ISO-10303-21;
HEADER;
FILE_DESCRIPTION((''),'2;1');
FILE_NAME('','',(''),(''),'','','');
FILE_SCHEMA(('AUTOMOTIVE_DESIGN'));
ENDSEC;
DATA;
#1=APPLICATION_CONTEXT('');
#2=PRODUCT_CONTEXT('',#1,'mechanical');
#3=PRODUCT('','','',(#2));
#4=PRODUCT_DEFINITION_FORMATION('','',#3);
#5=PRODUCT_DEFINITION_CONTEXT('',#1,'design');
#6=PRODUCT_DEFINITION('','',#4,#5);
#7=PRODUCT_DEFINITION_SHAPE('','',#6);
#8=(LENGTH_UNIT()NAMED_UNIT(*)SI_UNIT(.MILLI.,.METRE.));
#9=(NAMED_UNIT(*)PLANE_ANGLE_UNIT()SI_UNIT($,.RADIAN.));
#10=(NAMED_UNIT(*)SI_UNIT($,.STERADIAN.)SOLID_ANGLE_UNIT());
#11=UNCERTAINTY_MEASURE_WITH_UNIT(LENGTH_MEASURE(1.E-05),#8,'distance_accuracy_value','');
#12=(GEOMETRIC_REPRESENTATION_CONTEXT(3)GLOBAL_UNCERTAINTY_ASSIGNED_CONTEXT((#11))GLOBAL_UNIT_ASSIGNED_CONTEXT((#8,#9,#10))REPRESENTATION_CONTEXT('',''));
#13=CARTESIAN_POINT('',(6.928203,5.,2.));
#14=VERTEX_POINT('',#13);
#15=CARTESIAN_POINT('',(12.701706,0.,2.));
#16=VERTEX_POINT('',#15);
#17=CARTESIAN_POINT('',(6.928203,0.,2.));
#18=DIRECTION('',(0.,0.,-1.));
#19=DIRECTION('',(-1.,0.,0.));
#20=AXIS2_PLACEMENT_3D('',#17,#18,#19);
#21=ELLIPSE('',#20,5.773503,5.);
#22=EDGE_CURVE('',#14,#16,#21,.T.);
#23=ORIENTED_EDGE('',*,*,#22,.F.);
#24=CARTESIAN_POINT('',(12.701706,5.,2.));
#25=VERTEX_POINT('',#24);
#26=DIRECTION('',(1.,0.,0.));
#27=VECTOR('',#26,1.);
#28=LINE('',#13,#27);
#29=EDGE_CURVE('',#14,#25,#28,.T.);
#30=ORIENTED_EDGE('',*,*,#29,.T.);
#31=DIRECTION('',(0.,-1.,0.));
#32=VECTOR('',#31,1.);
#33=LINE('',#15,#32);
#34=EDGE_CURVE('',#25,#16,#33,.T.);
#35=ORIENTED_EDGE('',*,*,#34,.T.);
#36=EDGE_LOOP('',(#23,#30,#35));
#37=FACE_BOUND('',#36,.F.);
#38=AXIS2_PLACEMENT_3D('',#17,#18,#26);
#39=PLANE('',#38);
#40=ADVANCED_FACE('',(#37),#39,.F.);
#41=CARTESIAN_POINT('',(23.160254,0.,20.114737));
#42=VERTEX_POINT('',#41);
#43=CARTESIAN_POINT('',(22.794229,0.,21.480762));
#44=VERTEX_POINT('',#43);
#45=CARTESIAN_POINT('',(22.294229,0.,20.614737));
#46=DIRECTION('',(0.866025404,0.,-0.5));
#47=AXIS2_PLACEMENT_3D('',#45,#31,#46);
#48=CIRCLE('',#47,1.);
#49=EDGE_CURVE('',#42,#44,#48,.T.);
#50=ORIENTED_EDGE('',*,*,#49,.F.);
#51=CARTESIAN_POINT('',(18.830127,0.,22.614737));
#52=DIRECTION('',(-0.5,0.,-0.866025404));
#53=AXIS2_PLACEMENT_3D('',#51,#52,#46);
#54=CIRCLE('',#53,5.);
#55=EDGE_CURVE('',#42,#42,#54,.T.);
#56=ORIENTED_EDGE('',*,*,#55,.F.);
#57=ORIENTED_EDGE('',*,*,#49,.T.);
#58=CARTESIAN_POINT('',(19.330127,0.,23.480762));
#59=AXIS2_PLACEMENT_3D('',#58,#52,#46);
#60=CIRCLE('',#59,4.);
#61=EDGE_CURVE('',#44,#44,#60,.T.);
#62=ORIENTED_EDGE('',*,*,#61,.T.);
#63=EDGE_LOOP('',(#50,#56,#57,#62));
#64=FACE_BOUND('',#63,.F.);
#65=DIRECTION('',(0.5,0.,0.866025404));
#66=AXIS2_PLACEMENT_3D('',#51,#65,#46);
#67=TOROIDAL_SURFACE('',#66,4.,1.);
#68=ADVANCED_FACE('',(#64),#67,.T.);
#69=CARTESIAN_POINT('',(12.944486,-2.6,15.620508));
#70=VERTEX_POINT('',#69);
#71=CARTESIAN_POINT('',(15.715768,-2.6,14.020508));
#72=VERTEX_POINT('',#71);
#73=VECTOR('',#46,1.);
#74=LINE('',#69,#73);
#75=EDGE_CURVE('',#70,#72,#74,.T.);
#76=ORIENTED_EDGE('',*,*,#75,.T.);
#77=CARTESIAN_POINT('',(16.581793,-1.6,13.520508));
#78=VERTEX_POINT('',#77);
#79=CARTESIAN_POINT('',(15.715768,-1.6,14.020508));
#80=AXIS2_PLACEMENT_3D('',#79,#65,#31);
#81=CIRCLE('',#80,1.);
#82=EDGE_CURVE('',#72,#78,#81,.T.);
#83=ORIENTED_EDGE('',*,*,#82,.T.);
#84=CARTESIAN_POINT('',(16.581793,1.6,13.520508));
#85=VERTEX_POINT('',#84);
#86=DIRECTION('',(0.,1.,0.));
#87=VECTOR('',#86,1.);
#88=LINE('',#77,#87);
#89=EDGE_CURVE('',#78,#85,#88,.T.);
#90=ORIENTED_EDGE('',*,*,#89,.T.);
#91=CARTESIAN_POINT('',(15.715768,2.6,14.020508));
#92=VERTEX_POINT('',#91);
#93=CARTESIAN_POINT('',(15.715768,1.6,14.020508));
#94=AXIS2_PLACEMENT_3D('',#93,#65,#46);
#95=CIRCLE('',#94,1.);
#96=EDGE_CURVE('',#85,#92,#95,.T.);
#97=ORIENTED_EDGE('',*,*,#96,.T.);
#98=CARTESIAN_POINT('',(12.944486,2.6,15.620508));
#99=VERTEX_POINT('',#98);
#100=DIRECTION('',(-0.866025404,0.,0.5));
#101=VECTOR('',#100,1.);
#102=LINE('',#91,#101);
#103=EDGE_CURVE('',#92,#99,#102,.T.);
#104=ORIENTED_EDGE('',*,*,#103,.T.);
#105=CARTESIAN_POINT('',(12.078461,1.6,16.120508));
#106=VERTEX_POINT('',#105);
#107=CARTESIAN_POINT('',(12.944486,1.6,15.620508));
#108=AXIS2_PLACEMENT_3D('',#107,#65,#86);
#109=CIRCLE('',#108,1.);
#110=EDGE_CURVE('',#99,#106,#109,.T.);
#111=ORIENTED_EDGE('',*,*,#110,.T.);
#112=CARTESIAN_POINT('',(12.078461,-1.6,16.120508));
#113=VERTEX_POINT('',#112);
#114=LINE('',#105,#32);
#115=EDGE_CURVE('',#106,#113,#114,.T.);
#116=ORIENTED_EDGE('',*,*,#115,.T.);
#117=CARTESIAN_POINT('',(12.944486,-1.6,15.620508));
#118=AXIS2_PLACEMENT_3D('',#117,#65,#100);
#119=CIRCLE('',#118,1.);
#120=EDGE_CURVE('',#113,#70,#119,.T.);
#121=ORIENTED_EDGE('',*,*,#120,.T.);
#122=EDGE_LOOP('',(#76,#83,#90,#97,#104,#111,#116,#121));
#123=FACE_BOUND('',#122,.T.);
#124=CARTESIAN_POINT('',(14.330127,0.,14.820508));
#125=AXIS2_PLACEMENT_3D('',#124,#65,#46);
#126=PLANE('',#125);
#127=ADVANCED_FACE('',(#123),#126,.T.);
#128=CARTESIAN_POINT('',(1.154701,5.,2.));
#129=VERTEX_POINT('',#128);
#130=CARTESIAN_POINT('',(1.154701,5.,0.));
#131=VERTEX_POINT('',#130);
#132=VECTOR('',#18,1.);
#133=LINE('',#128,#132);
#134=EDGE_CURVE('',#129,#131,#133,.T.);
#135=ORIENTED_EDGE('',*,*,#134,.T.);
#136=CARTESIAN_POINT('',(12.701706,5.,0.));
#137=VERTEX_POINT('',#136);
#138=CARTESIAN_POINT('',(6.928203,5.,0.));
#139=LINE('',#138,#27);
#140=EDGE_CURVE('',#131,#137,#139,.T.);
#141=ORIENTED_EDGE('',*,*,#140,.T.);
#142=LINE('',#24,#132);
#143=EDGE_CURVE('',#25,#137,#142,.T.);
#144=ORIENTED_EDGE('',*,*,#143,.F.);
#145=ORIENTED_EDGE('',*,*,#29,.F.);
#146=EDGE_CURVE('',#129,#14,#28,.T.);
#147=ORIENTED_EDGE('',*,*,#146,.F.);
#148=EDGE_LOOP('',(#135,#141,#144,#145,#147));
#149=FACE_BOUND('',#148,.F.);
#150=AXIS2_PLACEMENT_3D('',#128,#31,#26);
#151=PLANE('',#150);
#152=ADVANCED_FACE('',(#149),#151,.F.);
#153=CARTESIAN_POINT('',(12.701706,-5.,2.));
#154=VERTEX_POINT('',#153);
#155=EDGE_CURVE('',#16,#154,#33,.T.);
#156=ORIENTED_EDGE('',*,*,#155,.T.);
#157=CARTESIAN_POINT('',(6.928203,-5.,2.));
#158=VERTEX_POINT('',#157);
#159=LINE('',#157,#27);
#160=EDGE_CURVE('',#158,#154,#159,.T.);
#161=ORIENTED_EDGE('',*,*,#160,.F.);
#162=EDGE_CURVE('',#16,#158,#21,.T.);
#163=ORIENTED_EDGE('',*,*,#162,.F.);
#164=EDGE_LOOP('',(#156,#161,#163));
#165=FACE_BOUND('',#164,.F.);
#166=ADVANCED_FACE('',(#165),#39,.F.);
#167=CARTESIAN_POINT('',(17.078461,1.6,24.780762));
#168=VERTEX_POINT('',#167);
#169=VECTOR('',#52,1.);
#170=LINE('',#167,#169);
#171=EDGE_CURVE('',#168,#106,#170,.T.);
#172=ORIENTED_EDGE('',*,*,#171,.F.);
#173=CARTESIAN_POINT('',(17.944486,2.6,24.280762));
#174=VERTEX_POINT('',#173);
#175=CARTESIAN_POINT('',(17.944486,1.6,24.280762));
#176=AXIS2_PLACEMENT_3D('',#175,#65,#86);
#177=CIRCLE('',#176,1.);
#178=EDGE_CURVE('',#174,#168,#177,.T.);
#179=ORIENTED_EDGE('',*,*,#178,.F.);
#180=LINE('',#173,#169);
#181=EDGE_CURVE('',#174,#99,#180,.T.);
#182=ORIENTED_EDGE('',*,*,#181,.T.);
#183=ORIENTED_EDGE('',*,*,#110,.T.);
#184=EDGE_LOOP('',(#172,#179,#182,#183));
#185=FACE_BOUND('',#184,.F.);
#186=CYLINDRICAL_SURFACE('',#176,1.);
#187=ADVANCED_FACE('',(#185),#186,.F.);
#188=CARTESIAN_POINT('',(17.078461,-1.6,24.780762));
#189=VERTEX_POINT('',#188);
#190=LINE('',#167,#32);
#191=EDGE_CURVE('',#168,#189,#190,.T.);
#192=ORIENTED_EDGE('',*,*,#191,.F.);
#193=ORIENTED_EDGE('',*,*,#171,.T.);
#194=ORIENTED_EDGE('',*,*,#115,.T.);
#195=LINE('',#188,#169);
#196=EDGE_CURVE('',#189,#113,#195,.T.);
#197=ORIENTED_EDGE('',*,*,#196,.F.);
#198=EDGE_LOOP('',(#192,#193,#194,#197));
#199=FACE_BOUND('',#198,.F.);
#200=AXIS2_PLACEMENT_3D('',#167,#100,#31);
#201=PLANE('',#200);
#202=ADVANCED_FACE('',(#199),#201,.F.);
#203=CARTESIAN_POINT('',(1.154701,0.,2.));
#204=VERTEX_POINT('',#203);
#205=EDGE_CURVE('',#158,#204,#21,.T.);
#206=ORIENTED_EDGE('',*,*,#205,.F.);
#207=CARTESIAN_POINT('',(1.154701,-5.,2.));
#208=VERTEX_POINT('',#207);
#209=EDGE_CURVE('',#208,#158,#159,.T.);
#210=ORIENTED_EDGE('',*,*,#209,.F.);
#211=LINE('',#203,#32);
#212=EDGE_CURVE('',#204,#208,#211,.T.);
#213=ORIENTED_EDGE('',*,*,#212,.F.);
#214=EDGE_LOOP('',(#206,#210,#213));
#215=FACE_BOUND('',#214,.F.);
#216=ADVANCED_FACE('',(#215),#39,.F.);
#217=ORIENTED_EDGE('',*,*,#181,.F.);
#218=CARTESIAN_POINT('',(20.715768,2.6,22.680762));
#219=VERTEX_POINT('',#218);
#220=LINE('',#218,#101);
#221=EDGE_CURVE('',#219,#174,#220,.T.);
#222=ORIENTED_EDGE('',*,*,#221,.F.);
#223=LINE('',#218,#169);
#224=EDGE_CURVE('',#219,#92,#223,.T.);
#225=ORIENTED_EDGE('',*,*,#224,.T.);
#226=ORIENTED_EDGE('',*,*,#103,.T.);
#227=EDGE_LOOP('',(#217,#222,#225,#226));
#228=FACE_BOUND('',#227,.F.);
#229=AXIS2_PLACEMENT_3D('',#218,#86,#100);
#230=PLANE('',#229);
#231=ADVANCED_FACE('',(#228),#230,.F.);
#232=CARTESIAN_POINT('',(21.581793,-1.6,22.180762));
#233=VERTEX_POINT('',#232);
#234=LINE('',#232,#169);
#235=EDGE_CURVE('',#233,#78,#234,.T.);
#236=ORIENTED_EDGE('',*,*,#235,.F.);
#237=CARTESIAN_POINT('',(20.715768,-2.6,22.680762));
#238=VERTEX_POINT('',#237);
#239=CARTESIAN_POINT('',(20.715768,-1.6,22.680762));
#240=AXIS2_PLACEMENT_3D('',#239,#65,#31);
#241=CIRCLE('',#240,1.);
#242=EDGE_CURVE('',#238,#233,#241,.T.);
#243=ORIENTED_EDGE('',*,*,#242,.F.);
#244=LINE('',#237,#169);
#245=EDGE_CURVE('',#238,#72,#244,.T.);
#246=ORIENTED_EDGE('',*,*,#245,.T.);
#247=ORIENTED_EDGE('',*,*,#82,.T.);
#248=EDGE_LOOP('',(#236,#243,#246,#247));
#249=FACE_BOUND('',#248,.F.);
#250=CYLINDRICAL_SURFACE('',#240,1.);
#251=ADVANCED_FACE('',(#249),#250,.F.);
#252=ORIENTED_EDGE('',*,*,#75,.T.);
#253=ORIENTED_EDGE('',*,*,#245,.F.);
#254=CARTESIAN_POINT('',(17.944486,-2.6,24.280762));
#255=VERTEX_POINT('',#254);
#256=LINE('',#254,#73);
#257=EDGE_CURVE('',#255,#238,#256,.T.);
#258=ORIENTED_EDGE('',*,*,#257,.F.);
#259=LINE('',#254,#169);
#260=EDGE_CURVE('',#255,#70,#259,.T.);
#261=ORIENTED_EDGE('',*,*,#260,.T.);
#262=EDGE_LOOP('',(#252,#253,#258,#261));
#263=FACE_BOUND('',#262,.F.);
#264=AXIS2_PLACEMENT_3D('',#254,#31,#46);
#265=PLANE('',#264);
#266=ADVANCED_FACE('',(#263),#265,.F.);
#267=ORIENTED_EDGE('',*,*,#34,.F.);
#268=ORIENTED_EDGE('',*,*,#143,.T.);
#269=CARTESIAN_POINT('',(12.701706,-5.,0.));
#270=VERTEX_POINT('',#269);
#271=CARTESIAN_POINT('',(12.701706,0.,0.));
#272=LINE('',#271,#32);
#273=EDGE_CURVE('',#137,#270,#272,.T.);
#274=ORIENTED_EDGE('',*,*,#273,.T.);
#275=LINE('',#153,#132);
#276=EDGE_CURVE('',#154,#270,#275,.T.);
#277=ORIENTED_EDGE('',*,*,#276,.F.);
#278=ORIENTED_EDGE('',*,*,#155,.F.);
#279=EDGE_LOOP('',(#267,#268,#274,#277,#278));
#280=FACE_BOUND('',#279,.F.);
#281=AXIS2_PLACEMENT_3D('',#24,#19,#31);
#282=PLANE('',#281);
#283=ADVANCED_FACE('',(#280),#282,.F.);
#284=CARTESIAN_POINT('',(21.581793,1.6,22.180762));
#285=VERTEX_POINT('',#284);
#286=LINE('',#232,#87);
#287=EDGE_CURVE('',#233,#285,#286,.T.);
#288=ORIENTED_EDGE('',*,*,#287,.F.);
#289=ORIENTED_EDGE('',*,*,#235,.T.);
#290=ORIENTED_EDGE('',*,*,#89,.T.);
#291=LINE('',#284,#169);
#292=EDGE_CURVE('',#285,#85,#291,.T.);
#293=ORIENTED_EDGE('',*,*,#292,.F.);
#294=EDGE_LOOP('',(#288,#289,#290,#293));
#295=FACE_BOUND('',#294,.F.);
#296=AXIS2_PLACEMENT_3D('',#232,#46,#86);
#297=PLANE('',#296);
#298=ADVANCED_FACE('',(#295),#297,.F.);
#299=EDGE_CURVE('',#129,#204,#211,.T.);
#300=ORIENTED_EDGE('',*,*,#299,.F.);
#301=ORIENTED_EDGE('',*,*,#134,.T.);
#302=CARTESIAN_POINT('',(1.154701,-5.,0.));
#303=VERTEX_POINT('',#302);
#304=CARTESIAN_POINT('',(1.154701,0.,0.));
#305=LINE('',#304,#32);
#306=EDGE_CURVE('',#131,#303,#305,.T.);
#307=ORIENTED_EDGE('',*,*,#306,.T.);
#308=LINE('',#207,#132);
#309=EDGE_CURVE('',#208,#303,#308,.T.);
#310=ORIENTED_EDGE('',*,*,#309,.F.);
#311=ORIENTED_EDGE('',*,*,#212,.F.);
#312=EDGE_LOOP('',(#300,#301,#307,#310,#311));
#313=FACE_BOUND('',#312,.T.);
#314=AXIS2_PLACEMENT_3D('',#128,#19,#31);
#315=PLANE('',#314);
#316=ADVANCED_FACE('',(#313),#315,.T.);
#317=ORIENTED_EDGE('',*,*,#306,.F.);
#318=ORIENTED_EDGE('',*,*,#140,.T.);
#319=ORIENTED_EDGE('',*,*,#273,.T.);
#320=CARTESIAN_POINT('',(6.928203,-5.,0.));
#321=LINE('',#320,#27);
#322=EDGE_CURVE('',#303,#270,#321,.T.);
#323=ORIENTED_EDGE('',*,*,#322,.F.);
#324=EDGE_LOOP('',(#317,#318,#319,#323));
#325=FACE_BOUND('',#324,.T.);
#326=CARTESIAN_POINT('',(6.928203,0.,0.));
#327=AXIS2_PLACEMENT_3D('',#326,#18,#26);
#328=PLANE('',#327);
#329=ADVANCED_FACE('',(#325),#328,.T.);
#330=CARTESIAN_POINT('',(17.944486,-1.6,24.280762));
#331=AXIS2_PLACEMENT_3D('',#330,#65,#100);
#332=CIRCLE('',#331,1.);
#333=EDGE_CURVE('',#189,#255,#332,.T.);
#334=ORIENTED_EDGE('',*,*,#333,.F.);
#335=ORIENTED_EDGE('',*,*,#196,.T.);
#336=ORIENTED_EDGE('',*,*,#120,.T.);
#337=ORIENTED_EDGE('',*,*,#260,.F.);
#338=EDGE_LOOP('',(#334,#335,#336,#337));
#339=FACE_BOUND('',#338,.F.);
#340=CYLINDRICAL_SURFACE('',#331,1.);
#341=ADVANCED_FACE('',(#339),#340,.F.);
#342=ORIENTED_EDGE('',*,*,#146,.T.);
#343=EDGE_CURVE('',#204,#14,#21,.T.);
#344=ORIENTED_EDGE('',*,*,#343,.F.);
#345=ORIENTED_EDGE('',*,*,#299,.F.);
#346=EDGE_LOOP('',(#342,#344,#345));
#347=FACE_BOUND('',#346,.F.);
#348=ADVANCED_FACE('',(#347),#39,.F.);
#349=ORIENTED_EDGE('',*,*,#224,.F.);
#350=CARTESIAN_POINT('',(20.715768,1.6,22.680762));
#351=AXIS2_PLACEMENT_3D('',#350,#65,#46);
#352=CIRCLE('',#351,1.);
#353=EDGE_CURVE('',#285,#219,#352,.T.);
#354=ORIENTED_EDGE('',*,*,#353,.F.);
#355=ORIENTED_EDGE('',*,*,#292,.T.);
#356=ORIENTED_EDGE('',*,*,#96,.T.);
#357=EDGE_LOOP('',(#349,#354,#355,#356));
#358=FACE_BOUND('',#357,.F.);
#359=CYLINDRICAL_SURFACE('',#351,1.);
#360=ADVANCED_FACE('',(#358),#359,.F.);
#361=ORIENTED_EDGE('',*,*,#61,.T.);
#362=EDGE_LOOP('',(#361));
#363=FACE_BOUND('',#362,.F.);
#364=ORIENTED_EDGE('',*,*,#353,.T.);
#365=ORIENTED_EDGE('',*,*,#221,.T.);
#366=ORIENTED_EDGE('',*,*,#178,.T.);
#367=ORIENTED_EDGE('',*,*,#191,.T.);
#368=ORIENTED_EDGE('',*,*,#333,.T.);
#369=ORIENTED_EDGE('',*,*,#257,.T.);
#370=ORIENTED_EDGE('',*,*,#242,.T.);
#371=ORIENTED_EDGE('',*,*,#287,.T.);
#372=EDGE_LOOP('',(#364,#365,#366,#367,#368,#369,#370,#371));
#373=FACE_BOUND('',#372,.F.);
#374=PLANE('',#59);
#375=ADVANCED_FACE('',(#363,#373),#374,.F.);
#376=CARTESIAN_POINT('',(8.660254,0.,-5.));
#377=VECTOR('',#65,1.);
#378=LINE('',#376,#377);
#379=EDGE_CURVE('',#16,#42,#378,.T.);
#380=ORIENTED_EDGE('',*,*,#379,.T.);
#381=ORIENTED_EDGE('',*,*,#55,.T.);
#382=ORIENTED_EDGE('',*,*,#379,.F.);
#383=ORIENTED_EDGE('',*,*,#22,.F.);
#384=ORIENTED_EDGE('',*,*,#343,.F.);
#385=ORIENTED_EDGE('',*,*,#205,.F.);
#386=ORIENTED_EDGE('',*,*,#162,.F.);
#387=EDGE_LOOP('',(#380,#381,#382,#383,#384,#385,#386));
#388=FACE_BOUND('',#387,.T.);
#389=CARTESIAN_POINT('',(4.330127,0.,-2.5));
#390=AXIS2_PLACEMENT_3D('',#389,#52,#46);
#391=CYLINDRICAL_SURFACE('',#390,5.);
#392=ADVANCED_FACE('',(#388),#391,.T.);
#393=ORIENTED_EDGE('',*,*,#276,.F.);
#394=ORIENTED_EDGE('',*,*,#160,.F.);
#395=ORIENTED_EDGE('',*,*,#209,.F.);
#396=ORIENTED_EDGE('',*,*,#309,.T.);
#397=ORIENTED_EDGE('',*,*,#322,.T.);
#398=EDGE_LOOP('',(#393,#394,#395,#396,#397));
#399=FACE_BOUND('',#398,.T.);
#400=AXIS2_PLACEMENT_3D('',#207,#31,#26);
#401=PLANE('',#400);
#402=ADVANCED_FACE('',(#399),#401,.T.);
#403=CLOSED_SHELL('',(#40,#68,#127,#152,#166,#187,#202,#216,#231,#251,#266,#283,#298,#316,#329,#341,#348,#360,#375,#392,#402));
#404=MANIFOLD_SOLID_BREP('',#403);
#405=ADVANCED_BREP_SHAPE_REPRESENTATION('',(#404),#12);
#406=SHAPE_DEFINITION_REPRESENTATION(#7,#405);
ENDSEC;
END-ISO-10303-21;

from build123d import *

# Parameters (mm, degrees)
F2_R     = 5
F3_DEPTH = 30
F4_W     = 12.7017059222
F4_H     = 7
F5_DEPTH = 5.5
F6_W     = 11.5470053838
F6_H     = 10
F7_DEPTH = 2
F9_DEPTH = 10
F10_R    = 1


with BuildPart() as f3:
    # F2 (on face) → F3 (new body)
    with BuildSketch(Plane(origin=(0, 0, 0), x_dir=(0.8660254038, 0, -0.5), z_dir=(-0.5, 0, -0.8660254038))):
        with Locations((5, 0)):
            Circle(F2_R)
    extrude(amount=-F3_DEPTH)

    # F4 (on Front) → F5 (cut, symmetric)
    with BuildSketch(Plane.XZ):
        with Locations((6.3508529611, -1.5)):
            Rectangle(F4_W, F4_H)
    extrude(amount=F5_DEPTH, both=True, mode=Mode.SUBTRACT)

    # F6 (on face) → F7 (join)
    with BuildSketch(Plane(origin=(0, 0, 2), x_dir=(1, 0, 0), z_dir=(0, 0, -1))):
        with Locations((6.9282032303, 0)):
            Rectangle(F6_W, F6_H)
    extrude(amount=F7_DEPTH)

    # F8 (on face) → F9 (cut)
    with BuildSketch(Plane(origin=(15, 0, 25.9807621135), x_dir=(0.8660254038, 0, -0.5), z_dir=(0.5, 0, 0.8660254038))):
        with BuildLine():
            Line((6.6, 2.6), (3.4, 2.6))
            ThreePointArc((3.4, 2.6), (2.6928932188, 2.3071067812), (2.4, 1.6))
            Line((2.4, 1.6), (2.4, -1.6))
            ThreePointArc((2.4, -1.6), (2.6928932188, -2.3071067812), (3.4, -2.6))
            Line((3.4, -2.6), (6.6, -2.6))
            ThreePointArc((6.6, -2.6), (7.3071067812, -2.3071067812), (7.6, -1.6))
            Line((7.6, -1.6), (7.6, 1.6))
            ThreePointArc((7.6, 1.6), (7.3071067812, 2.3071067812), (6.6, 2.6))
        make_face()
    extrude(amount=-F9_DEPTH, mode=Mode.SUBTRACT)

    # F10
    f10_edges = [f3.edges().sort_by_distance(p)[0] for p in [
        (15, 0, 25.980762),
    ]]
    fillet(f10_edges, radius=F10_R)


solid = f3.part
